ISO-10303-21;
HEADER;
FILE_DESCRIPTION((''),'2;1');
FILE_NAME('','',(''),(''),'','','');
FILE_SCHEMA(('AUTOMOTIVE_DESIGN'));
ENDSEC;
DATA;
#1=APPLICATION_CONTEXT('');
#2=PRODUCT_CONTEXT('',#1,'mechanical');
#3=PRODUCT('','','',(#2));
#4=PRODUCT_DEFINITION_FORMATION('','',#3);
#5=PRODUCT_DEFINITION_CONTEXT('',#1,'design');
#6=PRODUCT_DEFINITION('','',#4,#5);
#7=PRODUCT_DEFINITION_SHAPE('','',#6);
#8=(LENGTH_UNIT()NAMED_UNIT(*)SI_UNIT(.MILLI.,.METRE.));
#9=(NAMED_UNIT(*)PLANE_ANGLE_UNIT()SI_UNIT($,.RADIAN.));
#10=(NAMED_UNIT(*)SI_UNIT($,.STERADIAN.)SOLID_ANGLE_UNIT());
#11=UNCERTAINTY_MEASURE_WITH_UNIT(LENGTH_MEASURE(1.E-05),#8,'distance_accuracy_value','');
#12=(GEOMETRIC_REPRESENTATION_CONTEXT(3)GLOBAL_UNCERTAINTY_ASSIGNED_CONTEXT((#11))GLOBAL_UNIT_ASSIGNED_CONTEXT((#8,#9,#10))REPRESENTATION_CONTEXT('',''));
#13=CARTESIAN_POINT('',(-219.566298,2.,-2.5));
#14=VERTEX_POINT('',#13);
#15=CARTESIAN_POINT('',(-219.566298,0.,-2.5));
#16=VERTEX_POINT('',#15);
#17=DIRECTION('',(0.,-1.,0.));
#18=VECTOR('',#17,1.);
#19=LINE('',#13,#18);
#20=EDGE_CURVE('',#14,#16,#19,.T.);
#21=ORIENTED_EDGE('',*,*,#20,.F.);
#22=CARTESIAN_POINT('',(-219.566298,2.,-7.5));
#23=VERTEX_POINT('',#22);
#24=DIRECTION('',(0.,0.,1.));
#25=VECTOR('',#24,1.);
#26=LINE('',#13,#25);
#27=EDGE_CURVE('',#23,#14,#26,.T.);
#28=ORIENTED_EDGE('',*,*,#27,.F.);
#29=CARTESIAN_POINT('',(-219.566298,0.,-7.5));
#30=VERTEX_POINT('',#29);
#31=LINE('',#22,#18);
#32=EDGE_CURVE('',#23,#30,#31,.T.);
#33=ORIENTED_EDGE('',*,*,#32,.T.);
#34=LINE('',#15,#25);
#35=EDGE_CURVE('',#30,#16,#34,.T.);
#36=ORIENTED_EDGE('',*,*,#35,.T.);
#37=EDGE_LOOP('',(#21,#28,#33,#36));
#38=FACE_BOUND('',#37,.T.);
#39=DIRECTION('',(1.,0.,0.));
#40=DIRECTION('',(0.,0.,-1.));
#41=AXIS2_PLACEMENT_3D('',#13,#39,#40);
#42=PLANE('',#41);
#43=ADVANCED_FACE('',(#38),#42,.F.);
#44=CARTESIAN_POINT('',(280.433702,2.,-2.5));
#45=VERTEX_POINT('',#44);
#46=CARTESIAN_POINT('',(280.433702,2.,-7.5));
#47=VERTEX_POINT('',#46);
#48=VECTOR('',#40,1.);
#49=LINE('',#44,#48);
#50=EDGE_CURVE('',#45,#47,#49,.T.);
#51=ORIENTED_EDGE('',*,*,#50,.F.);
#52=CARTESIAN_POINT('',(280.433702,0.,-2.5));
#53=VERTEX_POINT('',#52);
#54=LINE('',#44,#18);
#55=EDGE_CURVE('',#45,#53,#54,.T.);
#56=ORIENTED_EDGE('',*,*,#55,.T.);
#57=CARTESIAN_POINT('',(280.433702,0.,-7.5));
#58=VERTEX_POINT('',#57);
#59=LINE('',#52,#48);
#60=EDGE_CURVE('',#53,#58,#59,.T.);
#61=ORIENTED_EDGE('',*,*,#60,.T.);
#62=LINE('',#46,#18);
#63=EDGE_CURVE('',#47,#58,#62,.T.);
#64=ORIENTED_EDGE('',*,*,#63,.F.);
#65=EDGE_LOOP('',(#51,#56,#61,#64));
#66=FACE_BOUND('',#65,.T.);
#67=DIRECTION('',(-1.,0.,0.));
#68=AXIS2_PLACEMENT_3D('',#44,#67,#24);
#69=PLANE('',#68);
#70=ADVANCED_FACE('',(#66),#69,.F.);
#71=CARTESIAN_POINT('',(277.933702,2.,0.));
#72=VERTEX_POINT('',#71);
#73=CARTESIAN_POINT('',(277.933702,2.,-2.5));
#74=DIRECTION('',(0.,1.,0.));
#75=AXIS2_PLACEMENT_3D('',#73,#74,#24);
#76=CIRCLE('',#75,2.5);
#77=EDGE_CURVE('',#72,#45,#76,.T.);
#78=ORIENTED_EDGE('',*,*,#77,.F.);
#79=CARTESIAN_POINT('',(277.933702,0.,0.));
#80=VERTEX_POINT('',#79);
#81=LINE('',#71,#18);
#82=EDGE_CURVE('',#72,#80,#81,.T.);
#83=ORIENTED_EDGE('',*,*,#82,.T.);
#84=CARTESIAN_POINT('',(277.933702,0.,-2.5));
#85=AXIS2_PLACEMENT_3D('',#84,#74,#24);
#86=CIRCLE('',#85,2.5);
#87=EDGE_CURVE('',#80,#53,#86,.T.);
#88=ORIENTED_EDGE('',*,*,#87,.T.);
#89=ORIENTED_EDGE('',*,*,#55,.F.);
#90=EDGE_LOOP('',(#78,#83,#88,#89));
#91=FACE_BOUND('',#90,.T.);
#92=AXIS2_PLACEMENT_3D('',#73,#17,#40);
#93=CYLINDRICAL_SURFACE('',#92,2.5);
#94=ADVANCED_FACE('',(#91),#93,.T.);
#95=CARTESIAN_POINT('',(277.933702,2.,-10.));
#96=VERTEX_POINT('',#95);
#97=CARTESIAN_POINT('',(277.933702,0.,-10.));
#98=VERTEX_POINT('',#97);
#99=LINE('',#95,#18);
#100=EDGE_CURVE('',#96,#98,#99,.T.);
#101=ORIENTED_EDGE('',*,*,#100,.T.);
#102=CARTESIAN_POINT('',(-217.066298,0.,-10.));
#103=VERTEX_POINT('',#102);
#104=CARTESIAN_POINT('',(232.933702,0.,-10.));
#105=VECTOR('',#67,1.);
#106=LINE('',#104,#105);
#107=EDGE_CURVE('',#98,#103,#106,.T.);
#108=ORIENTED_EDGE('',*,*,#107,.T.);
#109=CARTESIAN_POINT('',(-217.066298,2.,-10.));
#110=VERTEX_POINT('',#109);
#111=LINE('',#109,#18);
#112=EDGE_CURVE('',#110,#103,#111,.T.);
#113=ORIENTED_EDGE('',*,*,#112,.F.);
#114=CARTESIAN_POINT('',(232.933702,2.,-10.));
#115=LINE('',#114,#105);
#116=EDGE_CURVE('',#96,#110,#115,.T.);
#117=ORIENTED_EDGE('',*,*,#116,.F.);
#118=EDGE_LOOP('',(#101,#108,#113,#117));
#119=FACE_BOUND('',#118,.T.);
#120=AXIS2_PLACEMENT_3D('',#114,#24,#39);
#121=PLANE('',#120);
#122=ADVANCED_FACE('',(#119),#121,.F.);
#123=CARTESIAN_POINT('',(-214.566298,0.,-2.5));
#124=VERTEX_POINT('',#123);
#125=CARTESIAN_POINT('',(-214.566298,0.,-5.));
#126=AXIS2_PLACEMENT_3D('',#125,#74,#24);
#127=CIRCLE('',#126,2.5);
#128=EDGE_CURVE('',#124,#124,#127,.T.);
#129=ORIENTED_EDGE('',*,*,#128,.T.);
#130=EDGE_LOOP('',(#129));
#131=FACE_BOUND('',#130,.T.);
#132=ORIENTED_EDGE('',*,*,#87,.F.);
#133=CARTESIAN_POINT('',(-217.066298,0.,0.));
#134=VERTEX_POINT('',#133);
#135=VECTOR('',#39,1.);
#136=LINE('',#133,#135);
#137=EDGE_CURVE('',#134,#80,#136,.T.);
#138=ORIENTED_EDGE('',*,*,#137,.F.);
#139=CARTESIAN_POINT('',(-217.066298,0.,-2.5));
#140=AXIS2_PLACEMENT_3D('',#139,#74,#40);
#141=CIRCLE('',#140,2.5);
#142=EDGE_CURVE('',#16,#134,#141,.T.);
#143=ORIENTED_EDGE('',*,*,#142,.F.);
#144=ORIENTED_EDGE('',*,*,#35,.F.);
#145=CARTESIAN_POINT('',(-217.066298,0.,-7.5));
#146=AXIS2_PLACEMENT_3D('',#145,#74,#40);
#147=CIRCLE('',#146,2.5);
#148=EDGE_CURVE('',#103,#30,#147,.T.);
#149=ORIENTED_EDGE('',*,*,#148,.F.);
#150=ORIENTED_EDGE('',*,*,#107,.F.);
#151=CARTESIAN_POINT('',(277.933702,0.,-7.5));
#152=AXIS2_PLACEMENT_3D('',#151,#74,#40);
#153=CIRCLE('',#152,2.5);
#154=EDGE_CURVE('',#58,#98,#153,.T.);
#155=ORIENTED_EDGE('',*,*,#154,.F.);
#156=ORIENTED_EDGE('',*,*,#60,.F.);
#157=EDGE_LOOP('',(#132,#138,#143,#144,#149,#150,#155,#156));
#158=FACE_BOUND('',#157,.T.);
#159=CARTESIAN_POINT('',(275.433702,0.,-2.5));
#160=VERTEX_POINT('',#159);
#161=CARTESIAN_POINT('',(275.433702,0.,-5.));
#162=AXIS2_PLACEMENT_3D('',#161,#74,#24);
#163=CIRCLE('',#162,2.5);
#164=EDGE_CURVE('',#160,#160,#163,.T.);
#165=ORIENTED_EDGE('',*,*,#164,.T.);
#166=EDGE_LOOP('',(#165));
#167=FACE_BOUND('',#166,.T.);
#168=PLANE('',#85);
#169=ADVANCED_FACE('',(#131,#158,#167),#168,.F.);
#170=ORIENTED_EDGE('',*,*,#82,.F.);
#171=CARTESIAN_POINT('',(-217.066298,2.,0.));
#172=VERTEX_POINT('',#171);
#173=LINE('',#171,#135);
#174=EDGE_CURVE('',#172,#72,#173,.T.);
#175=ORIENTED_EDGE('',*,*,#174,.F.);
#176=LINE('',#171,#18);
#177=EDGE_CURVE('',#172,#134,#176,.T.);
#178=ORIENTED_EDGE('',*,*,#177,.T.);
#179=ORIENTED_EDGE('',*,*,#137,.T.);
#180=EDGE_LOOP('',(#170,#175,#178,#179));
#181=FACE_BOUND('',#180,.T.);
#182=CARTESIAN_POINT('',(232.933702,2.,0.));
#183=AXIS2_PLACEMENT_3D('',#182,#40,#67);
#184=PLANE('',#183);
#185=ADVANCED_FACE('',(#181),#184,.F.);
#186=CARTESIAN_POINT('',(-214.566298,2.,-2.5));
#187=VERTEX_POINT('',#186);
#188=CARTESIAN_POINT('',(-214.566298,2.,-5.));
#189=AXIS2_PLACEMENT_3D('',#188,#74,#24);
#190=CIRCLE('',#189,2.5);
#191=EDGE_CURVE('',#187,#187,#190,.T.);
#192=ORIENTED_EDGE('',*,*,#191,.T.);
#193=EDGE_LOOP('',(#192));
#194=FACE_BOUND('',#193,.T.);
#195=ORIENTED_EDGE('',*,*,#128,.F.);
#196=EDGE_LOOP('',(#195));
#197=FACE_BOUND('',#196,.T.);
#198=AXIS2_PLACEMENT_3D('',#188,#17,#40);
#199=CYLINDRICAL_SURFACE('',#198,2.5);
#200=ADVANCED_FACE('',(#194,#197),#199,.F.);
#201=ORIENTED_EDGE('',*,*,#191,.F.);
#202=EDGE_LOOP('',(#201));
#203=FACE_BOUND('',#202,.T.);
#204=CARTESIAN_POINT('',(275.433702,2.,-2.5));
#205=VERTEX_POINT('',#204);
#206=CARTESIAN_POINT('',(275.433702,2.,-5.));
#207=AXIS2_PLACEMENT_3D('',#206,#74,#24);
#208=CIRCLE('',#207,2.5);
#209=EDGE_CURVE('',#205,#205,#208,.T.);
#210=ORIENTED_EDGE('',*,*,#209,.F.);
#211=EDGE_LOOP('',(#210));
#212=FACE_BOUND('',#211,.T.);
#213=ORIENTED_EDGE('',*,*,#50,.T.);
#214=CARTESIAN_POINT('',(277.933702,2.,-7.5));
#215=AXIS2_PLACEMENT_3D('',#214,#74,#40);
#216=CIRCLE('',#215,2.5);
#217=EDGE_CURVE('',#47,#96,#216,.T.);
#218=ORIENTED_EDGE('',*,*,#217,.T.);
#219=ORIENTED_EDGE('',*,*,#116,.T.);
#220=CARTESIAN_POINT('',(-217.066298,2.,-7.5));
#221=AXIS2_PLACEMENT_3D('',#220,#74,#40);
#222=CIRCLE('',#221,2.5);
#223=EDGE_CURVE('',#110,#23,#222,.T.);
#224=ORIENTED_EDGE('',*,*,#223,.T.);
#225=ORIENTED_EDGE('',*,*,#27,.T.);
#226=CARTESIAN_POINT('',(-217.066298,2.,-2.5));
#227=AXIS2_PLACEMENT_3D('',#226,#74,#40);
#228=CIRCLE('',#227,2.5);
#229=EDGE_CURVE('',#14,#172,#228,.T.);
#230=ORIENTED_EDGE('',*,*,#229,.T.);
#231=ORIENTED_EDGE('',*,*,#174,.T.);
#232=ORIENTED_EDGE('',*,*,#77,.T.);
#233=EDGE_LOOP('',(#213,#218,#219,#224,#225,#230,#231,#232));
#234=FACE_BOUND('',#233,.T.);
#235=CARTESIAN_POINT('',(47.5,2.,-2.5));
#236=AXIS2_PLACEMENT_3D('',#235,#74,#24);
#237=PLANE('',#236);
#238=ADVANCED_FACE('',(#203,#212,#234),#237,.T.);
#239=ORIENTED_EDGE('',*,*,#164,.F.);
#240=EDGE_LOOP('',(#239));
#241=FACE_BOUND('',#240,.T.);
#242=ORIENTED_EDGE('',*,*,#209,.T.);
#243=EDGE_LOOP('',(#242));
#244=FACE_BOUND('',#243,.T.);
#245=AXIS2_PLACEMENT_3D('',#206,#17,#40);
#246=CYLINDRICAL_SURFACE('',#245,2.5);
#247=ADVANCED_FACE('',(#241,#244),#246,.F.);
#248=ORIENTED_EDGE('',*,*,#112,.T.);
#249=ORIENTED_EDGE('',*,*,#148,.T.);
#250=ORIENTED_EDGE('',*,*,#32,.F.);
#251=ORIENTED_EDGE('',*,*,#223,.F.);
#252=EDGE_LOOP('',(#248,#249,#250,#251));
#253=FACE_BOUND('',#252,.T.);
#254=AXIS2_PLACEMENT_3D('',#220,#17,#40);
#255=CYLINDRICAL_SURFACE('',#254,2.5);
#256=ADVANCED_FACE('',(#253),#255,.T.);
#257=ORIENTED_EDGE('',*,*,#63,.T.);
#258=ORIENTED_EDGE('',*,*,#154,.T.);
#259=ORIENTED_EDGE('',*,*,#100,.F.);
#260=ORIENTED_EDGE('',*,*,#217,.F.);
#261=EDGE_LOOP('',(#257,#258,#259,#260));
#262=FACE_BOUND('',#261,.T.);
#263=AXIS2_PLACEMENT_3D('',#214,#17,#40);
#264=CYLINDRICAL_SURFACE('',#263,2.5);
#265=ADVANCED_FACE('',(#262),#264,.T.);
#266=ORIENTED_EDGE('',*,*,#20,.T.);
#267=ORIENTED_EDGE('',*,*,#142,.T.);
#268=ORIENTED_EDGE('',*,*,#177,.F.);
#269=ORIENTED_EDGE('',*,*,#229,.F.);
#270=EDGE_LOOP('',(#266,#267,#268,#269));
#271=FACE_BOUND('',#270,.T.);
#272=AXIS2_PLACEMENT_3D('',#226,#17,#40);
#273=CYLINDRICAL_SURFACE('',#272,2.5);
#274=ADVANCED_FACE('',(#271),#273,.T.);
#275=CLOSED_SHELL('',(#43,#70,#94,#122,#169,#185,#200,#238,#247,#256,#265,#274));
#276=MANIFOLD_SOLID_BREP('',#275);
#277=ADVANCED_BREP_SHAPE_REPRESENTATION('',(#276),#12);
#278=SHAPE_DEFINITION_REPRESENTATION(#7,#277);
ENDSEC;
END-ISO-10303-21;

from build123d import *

# Parameters (mm, degrees)
SKETCH1_R           = 2.5
BOSS_EXTRUDE2_DEPTH = 2
FLEX1_OUTLINE_R     = 2.5
FLEX1_DEPTH         = 2


# Read off the part's stored shape, not the designer's step: Flex1
with BuildPart() as part:
    # Sketch1 → Boss-Extrude2 (new body)
    with BuildSketch(Plane(origin=(0, 0, 0), x_dir=(1, 0, 0), z_dir=(0, 1, 0))):
        with BuildLine():
            Line((2.5, 0), (47.5, 0))
            ThreePointArc((47.5, 0), (49.267766953, 0.732233047), (50, 2.5))
            Line((50, 2.5), (50, 7.5))
            ThreePointArc((50, 7.5), (49.267766953, 9.267766953), (47.5, 10))
            Line((47.5, 10), (2.5, 10))
            ThreePointArc((2.5, 10), (0.732233047, 9.267766953), (0, 7.5))
            Line((0, 7.5), (0, 2.5))
            ThreePointArc((0, 2.5), (0.732233047, 0.732233047), (2.5, 0))
        make_face()
        with Locations(Location((5, 5, 0), (0, 0, 270))):
            Circle(SKETCH1_R, mode=Mode.SUBTRACT)
        with Locations(Location((45, 5, 0), (0, 0, 270))):
            Circle(SKETCH1_R, mode=Mode.SUBTRACT)
    extrude(amount=BOSS_EXTRUDE2_DEPTH)

    # Flex1 outline → Flex1 (add)
    # profile 1 of 4: a face of its own
    with BuildSketch(Plane(origin=(0, 0, 0), x_dir=(1, 0, 0), z_dir=(0, 1, 0))):
        with BuildLine():
            Line((2.5, 10), (-217.066298, 10))
            ThreePointArc((-217.066298, 10), (-218.834064953, 9.267766953), (-219.566298, 7.5))
            Line((-219.566298, 7.5), (-219.566298, 2.5))
            ThreePointArc((-219.566298, 2.5), (-218.834064953, 0.732233047), (-217.066298, 0))
            Line((-217.066298, 0), (2.5, 0))
            ThreePointArc((2.5, 0), (0.732233047, 0.732233047), (0, 2.5))
            Line((0, 2.5), (0, 7.5))
            ThreePointArc((0, 7.5), (0.732233047, 9.267766953), (2.5, 10))
        make_face()
        with Locations((-214.566298, 5)):
            Circle(FLEX1_OUTLINE_R, mode=Mode.SUBTRACT)
    # profile 2 of 4: a face of its own
    with BuildSketch(Plane(origin=(0, 0, 0), x_dir=(1, 0, 0), z_dir=(0, 1, 0))):
        with BuildLine():
            Line((277.933702, 10), (47.5, 10))
            ThreePointArc((47.5, 10), (49.267766953, 9.267766953), (50, 7.5))
            Line((50, 7.5), (50, 2.5))
            ThreePointArc((50, 2.5), (49.267766953, 0.732233047), (47.5, 0))
            Line((47.5, 0), (277.933702, 0))
            ThreePointArc((277.933702, 0), (279.701468953, 0.732233047), (280.433702, 2.5))
            Line((280.433702, 2.5), (280.433702, 7.5))
            ThreePointArc((280.433702, 7.5), (279.701468953, 9.267766953), (277.933702, 10))
        make_face()
        with Locations((275.433702, 5)):
            Circle(FLEX1_OUTLINE_R, mode=Mode.SUBTRACT)
    # profile 3 of 4: a face of its own
    with BuildSketch(Plane(origin=(0, 0, 0), x_dir=(1, 0, 0), z_dir=(0, 1, 0))):
        with Locations((5, 5)):
            Circle(FLEX1_OUTLINE_R)
    # profile 4 of 4: a face of its own
    with BuildSketch(Plane(origin=(0, 0, 0), x_dir=(1, 0, 0), z_dir=(0, 1, 0))):
        with Locations((45, 5)):
            Circle(FLEX1_OUTLINE_R)
    extrude(amount=FLEX1_DEPTH)


solid = part.part
